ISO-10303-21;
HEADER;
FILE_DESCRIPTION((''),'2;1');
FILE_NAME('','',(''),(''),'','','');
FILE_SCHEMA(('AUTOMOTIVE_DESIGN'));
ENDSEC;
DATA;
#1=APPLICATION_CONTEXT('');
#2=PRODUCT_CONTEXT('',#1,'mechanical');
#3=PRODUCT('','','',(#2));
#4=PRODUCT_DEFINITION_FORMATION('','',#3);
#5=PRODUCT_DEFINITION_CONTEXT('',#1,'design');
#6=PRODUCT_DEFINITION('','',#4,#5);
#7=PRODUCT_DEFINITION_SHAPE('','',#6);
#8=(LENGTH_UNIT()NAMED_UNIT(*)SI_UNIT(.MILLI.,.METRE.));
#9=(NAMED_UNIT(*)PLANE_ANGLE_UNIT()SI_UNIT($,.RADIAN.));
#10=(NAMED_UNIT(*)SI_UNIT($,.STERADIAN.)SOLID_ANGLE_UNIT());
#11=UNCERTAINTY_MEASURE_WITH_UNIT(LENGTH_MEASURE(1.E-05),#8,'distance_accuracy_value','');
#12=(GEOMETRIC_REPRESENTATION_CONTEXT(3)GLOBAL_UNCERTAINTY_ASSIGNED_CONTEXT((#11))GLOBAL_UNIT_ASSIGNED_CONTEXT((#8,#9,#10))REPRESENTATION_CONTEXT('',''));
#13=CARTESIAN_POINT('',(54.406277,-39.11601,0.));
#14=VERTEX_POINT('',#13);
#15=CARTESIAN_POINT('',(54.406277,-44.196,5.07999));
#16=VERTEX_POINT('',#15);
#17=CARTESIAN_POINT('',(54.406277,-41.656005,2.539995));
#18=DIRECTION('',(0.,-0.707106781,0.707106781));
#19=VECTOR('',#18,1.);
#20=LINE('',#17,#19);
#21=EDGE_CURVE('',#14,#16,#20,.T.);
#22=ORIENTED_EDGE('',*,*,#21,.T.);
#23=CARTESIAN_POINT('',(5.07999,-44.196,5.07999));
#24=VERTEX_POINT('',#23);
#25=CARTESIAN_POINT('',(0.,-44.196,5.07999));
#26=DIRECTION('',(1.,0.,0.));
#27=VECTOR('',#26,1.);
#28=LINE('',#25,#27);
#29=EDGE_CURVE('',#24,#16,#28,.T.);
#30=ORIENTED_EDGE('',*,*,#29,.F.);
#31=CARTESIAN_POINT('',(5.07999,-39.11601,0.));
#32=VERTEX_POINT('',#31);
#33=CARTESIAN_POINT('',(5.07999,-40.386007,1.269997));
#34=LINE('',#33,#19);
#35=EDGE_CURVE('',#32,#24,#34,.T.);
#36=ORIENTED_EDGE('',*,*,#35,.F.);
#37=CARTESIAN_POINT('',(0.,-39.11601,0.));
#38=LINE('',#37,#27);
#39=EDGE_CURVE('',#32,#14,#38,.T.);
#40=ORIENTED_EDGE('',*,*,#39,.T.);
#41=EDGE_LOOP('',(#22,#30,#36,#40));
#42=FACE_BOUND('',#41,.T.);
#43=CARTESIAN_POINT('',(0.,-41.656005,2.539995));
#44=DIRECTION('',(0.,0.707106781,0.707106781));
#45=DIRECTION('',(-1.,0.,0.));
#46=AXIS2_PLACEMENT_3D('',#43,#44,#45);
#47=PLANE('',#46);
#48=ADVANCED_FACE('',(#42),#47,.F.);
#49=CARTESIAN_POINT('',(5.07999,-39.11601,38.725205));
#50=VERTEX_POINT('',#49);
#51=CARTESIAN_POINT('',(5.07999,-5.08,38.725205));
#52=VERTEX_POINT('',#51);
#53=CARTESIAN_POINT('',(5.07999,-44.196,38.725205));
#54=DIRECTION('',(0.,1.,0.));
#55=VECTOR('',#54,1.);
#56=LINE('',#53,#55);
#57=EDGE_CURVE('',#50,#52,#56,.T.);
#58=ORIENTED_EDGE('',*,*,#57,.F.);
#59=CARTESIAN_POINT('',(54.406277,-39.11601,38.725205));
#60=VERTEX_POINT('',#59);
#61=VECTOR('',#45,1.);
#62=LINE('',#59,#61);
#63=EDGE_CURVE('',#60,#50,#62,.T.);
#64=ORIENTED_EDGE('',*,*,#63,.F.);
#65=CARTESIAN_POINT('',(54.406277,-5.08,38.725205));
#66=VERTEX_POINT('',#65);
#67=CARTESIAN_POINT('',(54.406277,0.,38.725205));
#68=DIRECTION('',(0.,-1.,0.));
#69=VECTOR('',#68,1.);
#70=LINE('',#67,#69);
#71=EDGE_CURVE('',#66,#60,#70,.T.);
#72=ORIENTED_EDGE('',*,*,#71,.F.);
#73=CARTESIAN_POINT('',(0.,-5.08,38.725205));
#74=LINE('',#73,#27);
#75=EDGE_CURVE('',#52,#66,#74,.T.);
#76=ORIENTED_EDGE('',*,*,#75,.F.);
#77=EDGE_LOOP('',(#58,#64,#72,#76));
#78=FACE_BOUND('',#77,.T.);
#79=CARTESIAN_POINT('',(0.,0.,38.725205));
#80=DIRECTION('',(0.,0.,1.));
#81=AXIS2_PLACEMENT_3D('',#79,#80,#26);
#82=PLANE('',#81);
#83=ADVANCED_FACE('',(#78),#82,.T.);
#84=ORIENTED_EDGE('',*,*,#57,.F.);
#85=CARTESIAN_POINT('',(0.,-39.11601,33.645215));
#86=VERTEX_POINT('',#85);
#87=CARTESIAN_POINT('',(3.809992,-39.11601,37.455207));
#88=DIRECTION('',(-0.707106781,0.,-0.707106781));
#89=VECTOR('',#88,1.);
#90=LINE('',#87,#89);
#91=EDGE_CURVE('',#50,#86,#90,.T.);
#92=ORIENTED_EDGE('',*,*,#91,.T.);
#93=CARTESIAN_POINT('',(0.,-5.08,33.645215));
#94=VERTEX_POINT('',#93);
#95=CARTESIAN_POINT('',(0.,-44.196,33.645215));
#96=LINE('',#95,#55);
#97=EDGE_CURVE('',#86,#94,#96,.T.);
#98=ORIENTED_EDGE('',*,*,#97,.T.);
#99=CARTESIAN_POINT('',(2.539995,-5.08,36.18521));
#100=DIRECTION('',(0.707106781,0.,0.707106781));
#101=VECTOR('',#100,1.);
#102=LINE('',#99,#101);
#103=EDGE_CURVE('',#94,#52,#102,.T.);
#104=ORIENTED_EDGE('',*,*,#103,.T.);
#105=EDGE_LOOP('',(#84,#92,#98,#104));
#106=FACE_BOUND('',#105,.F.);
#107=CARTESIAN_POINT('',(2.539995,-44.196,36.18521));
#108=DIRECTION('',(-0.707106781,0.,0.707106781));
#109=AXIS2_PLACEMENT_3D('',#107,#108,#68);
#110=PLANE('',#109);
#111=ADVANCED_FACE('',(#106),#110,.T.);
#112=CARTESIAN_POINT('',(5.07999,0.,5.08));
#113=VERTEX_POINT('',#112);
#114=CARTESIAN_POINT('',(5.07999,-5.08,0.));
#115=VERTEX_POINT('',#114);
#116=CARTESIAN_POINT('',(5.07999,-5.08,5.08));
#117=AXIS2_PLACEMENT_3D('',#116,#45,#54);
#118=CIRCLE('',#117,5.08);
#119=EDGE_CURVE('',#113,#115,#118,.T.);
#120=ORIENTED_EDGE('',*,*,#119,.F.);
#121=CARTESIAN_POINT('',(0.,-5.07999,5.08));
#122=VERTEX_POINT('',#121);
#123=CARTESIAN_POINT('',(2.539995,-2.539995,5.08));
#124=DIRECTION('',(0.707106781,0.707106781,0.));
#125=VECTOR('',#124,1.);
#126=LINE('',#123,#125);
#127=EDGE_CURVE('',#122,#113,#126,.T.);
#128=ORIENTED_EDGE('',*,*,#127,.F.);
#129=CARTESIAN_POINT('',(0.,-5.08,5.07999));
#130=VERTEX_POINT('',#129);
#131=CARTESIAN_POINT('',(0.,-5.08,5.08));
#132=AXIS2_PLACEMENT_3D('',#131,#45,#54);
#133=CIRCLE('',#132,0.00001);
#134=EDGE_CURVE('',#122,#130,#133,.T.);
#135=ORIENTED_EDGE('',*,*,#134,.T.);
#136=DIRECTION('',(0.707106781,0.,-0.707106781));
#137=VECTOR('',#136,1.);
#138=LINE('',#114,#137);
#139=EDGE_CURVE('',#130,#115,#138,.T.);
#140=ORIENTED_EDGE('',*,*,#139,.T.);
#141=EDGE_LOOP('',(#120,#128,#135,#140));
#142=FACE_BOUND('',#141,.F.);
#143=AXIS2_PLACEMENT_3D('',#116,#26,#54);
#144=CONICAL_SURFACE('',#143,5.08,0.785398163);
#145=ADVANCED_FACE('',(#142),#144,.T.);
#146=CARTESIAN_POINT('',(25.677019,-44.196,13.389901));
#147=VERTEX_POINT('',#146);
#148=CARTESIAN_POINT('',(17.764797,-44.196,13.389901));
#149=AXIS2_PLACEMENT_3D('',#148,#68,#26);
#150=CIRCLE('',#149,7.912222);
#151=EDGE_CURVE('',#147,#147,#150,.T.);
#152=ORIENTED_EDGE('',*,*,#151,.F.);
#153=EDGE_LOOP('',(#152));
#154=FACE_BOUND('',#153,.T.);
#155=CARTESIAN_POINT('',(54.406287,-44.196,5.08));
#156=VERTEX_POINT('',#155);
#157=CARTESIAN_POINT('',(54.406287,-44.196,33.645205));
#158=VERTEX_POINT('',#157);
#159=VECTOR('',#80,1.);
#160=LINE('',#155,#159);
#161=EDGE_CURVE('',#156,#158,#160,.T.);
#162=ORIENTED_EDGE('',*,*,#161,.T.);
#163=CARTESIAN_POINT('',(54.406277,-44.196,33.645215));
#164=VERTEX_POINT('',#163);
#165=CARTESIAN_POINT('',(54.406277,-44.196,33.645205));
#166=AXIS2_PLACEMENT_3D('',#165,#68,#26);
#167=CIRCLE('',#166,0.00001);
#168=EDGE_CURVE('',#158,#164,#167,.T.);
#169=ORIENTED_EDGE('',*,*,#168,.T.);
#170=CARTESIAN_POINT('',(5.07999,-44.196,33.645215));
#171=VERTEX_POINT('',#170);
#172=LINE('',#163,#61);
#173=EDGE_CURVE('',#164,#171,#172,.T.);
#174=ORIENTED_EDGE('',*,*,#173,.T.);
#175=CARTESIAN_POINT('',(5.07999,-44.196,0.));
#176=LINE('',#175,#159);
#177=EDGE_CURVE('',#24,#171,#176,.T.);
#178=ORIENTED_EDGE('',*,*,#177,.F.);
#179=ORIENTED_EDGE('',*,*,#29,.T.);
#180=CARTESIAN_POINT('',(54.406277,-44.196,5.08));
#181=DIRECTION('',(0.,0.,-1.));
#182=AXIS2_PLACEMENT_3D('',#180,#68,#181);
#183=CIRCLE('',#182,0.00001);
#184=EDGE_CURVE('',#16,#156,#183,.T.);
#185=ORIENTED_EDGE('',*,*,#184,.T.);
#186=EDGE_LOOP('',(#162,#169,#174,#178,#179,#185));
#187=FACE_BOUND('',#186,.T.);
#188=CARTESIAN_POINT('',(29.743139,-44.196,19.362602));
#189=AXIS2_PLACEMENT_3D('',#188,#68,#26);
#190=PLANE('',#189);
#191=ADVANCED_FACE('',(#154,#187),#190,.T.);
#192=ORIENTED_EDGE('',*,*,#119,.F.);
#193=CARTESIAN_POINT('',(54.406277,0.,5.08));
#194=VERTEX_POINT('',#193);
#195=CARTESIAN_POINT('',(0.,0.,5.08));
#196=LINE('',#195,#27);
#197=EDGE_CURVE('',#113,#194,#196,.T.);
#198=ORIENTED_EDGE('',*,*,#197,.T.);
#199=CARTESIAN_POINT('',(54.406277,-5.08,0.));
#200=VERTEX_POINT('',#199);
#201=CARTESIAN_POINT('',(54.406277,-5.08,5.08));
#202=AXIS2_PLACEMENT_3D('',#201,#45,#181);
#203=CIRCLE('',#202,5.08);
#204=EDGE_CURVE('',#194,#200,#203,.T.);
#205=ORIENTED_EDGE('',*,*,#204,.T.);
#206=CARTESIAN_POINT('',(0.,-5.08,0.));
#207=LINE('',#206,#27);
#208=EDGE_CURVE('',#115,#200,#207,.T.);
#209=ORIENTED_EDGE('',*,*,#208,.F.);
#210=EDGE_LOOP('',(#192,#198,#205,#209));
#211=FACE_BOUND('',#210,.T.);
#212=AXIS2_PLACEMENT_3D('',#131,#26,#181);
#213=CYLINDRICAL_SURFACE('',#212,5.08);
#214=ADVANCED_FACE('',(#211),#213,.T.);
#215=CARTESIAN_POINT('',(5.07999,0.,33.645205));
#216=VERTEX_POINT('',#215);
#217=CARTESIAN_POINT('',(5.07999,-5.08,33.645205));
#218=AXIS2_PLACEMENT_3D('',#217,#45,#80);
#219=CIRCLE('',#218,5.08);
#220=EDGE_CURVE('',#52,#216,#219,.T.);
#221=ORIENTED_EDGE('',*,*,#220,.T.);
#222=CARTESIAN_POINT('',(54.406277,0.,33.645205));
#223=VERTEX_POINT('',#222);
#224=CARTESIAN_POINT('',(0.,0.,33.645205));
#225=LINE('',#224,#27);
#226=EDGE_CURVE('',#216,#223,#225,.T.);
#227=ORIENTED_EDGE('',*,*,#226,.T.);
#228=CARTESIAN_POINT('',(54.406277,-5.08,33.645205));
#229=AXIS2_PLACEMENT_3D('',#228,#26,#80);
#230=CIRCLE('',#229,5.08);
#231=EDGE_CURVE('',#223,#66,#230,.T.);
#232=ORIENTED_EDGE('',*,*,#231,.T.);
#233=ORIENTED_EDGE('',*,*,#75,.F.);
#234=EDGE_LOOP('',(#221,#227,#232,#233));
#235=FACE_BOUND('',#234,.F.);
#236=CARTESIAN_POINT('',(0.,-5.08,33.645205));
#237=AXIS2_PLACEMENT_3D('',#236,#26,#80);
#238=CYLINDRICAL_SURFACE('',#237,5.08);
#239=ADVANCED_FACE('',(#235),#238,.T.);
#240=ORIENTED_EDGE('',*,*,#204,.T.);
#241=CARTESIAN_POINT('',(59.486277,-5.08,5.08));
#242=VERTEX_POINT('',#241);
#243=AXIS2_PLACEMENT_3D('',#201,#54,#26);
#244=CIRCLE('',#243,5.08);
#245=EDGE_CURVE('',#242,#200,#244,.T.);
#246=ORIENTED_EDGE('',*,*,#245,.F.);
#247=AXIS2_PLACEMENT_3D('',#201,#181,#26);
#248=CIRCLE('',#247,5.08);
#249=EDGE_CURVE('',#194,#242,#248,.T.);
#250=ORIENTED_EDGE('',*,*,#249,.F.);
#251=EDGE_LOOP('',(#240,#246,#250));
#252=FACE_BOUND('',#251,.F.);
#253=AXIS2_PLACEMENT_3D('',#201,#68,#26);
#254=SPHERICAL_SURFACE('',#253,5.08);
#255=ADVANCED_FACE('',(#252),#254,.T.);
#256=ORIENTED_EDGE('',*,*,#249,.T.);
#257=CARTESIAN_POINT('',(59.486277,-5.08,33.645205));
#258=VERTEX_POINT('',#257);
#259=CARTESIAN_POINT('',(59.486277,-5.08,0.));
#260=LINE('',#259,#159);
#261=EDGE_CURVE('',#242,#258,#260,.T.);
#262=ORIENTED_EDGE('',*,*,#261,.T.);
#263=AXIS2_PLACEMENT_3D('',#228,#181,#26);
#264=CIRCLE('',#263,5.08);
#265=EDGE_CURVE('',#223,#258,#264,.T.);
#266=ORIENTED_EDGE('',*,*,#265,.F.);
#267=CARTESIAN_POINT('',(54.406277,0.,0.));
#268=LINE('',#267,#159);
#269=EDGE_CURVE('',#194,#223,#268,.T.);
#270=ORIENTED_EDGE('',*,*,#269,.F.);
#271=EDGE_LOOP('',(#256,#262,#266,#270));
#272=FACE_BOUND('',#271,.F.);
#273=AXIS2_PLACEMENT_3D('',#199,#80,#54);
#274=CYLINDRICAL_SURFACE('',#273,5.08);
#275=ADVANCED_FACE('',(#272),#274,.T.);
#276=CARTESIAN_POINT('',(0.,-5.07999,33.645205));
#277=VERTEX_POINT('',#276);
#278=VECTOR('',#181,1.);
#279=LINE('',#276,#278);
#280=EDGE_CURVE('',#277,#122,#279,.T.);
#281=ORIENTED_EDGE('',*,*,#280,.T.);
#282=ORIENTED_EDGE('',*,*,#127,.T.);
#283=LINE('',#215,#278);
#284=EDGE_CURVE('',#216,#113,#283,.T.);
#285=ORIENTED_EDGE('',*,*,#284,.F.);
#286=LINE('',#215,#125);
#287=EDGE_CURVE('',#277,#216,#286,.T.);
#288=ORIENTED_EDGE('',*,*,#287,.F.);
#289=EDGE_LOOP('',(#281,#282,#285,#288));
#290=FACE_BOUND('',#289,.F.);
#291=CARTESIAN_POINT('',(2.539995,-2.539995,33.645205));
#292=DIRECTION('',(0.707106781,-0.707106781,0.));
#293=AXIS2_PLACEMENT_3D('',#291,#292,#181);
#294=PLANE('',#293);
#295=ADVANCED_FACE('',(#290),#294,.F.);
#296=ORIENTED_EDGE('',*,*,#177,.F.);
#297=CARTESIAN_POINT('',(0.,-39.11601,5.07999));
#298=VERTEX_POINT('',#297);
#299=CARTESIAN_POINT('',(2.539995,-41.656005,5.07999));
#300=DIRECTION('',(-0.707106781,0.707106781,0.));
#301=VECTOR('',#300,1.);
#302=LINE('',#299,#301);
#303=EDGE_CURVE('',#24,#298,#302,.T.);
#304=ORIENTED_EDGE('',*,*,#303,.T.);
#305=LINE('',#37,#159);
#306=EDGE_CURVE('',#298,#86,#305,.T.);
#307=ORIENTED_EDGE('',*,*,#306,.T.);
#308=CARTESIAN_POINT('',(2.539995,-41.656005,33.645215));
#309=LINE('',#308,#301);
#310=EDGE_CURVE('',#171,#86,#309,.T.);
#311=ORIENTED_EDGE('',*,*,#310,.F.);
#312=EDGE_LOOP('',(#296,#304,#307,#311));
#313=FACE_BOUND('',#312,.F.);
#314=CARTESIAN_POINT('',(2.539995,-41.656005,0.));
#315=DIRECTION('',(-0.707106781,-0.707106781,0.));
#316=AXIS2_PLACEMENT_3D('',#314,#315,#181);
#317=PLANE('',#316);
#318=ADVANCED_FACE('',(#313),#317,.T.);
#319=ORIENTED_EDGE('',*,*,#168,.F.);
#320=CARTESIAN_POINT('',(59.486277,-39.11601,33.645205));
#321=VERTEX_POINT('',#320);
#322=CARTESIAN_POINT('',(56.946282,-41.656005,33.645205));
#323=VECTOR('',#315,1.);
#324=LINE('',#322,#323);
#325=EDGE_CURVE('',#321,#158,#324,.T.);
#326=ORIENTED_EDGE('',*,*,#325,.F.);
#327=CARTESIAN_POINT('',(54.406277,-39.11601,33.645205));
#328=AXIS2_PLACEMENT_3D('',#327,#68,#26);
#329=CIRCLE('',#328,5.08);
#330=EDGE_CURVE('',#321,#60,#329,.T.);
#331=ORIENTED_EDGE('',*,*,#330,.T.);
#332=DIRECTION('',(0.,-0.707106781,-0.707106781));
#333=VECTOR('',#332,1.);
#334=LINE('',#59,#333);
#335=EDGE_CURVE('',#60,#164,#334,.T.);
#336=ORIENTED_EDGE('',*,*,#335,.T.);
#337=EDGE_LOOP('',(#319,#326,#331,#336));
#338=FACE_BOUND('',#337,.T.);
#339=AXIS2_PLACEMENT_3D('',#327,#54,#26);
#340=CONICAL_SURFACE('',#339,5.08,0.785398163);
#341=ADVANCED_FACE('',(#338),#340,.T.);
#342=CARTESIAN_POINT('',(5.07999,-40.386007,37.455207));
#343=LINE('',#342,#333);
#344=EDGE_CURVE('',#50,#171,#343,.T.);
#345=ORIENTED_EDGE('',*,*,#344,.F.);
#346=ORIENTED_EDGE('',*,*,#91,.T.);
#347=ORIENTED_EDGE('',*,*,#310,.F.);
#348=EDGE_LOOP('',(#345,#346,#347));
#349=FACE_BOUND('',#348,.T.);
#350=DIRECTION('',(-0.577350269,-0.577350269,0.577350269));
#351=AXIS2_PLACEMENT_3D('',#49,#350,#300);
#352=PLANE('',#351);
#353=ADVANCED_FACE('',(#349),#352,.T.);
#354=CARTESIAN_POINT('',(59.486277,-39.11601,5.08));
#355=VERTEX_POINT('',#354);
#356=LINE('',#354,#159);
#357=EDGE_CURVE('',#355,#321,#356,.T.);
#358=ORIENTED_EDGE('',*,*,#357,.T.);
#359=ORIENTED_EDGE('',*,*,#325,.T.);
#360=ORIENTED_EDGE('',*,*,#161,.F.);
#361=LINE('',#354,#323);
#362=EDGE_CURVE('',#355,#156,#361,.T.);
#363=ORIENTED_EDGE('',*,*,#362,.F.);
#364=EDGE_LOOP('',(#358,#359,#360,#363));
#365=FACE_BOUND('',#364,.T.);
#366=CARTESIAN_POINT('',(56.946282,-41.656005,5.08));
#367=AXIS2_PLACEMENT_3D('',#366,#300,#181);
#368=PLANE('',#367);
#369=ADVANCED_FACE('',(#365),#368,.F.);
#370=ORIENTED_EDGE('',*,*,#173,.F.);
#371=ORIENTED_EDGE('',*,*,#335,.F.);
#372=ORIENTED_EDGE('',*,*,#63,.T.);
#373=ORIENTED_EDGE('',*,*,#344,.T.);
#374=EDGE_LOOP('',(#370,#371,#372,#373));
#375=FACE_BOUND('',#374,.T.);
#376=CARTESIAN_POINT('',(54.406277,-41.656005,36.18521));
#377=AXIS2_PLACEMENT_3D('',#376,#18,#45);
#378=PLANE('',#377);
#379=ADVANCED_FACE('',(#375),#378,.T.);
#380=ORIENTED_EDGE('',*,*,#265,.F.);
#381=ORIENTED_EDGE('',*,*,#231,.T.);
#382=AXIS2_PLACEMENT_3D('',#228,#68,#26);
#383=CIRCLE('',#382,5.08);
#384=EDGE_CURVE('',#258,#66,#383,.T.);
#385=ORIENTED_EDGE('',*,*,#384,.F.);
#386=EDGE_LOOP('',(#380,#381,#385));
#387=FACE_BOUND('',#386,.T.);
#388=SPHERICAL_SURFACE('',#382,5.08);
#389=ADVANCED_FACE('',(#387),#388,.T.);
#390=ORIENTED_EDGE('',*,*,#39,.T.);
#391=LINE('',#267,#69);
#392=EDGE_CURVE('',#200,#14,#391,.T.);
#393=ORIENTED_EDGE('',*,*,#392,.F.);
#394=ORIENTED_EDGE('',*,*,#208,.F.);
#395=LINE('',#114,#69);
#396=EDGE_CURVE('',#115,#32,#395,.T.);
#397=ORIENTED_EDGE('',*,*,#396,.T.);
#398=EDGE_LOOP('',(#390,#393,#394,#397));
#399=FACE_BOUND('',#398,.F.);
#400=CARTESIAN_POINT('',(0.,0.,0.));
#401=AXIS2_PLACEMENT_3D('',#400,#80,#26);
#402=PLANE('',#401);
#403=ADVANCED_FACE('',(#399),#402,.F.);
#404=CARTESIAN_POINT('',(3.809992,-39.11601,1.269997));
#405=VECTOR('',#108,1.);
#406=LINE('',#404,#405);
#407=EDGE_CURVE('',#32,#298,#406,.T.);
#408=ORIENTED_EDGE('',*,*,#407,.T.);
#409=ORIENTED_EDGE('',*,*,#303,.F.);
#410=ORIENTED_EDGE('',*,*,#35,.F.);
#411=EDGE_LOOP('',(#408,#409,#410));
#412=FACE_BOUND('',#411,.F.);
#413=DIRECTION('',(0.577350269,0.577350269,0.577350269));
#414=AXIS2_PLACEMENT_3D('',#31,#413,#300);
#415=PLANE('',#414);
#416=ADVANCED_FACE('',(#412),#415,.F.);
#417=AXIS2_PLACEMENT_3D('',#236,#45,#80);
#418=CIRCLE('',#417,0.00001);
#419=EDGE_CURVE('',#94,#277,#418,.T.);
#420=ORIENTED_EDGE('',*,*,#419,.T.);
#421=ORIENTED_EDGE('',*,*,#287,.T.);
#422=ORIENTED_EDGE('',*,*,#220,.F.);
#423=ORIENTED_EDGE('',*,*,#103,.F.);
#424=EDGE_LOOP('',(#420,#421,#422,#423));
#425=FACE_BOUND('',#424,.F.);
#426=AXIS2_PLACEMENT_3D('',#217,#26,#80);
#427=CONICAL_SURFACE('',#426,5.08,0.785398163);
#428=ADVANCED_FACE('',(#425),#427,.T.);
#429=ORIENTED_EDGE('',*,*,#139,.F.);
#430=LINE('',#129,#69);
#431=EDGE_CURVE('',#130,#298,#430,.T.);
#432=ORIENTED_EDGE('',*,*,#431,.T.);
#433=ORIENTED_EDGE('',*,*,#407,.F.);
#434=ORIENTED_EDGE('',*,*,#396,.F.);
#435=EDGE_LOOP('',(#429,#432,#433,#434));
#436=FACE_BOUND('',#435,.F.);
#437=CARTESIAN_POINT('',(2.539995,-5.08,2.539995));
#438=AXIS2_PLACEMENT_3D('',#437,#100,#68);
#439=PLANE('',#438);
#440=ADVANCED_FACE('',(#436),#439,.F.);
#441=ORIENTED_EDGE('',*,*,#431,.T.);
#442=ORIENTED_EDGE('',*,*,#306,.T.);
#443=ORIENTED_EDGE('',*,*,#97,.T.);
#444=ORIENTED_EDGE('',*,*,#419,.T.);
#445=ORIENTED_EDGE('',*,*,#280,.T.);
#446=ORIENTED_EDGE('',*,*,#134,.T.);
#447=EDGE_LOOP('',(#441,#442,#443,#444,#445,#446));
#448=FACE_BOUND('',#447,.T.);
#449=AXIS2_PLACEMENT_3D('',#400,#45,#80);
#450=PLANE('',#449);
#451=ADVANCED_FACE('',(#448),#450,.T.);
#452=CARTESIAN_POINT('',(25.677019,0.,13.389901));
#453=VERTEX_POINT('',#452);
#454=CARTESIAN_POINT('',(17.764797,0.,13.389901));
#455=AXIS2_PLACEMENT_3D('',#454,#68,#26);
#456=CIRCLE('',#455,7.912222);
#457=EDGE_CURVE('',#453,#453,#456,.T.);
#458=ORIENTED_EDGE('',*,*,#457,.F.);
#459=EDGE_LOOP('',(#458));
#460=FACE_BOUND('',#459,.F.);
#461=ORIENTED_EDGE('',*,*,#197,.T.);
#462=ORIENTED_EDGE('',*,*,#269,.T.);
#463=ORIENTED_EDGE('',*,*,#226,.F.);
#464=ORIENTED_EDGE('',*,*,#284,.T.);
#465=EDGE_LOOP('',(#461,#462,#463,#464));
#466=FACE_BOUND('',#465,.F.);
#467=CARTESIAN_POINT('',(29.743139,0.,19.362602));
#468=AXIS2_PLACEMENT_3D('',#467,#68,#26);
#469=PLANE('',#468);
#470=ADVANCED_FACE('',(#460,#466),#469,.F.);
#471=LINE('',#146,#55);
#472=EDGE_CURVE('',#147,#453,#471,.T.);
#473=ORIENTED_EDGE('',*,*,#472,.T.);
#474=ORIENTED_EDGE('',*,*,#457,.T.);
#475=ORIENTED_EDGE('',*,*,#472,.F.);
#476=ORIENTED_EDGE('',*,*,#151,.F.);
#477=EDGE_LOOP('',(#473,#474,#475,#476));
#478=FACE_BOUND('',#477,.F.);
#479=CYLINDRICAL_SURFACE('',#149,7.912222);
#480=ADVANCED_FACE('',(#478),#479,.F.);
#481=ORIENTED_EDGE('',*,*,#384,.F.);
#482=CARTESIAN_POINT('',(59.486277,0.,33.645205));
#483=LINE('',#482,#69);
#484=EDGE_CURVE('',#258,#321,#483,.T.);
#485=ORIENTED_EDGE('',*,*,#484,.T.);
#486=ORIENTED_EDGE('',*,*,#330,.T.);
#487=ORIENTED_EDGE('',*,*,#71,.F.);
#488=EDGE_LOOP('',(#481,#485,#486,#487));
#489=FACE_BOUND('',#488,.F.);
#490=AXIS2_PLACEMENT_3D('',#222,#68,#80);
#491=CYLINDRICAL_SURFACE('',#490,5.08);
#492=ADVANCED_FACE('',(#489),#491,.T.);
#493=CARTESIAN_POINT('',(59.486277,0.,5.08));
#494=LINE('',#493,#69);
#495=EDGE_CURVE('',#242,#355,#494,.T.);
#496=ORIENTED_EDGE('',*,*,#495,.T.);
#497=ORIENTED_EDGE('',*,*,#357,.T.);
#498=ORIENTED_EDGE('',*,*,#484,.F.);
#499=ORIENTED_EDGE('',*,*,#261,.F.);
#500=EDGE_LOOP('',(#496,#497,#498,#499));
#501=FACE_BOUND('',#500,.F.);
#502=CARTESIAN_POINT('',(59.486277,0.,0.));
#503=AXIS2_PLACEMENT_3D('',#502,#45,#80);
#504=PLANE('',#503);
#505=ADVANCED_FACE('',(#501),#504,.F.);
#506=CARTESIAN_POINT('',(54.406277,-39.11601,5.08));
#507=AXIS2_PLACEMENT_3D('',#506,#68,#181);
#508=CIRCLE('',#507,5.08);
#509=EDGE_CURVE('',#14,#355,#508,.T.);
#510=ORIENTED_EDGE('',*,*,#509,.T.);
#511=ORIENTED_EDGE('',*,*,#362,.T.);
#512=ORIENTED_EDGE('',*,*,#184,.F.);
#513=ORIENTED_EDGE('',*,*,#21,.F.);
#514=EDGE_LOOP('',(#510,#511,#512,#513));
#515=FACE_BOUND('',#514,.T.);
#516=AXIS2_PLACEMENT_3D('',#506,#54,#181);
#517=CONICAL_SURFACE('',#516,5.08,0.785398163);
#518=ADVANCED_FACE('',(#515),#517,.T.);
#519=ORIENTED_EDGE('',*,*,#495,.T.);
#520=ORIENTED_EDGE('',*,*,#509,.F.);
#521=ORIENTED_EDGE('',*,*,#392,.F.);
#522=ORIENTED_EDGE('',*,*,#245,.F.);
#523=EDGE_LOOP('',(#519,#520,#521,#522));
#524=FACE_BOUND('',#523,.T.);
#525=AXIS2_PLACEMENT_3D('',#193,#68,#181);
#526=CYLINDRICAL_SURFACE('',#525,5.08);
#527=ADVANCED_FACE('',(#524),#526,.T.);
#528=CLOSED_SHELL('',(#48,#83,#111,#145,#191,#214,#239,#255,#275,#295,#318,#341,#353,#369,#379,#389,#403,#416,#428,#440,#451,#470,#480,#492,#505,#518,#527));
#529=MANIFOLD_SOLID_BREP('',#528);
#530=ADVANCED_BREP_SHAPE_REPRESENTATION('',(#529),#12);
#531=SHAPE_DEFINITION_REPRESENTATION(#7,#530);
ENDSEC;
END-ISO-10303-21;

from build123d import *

# Parameters (mm, degrees)
F0_W     = 59.4862774014
F0_H     = 38.7252047658
F1_DEPTH = 44.196
F2_R     = 7.9122216874
F3_DEPTH = 70.104
F4_R     = 5.08
F5_SIZE  = 5.07999


# Not quite as in the source:
# - a fillet or chamfer is up to 0.001 mm smaller than in the source, because OpenCascade refuses the exact size


with BuildPart() as f1:
    # F0 (on Front) → F1 (new body)
    with BuildSketch(Plane.XZ):
        with Locations((29.7431387007, 19.3626023829)):
            Rectangle(F0_W, F0_H)
    extrude(amount=F1_DEPTH)

    # F2 (on face) → F3 (cut)
    with BuildSketch(Plane.XZ.offset(44.196)):
        with Locations((17.7647974342, 13.3899012581)):
            Circle(F2_R)
    extrude(amount=-F3_DEPTH, mode=Mode.SUBTRACT)

    # F4
    f4_edges = [f1.edges().sort_by_distance(p)[0] for p in [
        (59.486277, -22.098, 38.725205),
        (59.486277, -22.098, 0),
        (59.486277, 0, 19.362602),
        (29.743139, 0, 38.725205),
        (29.743139, 0, 0),
    ]]
    fillet(f4_edges, radius=F4_R)

    # F5 (size 5.08 in the source; OpenCascade refuses exactly that, so slightly less here)
    f5_edges = [f1.edges().sort_by_distance(p)[0] for p in [
        (0, -44.196, 19.362602),
        (27.203139, -44.196, 0),
        (0, -24.638, 0),
    ]]
    chamfer(f5_edges, length=F5_SIZE)


solid = f1.part
